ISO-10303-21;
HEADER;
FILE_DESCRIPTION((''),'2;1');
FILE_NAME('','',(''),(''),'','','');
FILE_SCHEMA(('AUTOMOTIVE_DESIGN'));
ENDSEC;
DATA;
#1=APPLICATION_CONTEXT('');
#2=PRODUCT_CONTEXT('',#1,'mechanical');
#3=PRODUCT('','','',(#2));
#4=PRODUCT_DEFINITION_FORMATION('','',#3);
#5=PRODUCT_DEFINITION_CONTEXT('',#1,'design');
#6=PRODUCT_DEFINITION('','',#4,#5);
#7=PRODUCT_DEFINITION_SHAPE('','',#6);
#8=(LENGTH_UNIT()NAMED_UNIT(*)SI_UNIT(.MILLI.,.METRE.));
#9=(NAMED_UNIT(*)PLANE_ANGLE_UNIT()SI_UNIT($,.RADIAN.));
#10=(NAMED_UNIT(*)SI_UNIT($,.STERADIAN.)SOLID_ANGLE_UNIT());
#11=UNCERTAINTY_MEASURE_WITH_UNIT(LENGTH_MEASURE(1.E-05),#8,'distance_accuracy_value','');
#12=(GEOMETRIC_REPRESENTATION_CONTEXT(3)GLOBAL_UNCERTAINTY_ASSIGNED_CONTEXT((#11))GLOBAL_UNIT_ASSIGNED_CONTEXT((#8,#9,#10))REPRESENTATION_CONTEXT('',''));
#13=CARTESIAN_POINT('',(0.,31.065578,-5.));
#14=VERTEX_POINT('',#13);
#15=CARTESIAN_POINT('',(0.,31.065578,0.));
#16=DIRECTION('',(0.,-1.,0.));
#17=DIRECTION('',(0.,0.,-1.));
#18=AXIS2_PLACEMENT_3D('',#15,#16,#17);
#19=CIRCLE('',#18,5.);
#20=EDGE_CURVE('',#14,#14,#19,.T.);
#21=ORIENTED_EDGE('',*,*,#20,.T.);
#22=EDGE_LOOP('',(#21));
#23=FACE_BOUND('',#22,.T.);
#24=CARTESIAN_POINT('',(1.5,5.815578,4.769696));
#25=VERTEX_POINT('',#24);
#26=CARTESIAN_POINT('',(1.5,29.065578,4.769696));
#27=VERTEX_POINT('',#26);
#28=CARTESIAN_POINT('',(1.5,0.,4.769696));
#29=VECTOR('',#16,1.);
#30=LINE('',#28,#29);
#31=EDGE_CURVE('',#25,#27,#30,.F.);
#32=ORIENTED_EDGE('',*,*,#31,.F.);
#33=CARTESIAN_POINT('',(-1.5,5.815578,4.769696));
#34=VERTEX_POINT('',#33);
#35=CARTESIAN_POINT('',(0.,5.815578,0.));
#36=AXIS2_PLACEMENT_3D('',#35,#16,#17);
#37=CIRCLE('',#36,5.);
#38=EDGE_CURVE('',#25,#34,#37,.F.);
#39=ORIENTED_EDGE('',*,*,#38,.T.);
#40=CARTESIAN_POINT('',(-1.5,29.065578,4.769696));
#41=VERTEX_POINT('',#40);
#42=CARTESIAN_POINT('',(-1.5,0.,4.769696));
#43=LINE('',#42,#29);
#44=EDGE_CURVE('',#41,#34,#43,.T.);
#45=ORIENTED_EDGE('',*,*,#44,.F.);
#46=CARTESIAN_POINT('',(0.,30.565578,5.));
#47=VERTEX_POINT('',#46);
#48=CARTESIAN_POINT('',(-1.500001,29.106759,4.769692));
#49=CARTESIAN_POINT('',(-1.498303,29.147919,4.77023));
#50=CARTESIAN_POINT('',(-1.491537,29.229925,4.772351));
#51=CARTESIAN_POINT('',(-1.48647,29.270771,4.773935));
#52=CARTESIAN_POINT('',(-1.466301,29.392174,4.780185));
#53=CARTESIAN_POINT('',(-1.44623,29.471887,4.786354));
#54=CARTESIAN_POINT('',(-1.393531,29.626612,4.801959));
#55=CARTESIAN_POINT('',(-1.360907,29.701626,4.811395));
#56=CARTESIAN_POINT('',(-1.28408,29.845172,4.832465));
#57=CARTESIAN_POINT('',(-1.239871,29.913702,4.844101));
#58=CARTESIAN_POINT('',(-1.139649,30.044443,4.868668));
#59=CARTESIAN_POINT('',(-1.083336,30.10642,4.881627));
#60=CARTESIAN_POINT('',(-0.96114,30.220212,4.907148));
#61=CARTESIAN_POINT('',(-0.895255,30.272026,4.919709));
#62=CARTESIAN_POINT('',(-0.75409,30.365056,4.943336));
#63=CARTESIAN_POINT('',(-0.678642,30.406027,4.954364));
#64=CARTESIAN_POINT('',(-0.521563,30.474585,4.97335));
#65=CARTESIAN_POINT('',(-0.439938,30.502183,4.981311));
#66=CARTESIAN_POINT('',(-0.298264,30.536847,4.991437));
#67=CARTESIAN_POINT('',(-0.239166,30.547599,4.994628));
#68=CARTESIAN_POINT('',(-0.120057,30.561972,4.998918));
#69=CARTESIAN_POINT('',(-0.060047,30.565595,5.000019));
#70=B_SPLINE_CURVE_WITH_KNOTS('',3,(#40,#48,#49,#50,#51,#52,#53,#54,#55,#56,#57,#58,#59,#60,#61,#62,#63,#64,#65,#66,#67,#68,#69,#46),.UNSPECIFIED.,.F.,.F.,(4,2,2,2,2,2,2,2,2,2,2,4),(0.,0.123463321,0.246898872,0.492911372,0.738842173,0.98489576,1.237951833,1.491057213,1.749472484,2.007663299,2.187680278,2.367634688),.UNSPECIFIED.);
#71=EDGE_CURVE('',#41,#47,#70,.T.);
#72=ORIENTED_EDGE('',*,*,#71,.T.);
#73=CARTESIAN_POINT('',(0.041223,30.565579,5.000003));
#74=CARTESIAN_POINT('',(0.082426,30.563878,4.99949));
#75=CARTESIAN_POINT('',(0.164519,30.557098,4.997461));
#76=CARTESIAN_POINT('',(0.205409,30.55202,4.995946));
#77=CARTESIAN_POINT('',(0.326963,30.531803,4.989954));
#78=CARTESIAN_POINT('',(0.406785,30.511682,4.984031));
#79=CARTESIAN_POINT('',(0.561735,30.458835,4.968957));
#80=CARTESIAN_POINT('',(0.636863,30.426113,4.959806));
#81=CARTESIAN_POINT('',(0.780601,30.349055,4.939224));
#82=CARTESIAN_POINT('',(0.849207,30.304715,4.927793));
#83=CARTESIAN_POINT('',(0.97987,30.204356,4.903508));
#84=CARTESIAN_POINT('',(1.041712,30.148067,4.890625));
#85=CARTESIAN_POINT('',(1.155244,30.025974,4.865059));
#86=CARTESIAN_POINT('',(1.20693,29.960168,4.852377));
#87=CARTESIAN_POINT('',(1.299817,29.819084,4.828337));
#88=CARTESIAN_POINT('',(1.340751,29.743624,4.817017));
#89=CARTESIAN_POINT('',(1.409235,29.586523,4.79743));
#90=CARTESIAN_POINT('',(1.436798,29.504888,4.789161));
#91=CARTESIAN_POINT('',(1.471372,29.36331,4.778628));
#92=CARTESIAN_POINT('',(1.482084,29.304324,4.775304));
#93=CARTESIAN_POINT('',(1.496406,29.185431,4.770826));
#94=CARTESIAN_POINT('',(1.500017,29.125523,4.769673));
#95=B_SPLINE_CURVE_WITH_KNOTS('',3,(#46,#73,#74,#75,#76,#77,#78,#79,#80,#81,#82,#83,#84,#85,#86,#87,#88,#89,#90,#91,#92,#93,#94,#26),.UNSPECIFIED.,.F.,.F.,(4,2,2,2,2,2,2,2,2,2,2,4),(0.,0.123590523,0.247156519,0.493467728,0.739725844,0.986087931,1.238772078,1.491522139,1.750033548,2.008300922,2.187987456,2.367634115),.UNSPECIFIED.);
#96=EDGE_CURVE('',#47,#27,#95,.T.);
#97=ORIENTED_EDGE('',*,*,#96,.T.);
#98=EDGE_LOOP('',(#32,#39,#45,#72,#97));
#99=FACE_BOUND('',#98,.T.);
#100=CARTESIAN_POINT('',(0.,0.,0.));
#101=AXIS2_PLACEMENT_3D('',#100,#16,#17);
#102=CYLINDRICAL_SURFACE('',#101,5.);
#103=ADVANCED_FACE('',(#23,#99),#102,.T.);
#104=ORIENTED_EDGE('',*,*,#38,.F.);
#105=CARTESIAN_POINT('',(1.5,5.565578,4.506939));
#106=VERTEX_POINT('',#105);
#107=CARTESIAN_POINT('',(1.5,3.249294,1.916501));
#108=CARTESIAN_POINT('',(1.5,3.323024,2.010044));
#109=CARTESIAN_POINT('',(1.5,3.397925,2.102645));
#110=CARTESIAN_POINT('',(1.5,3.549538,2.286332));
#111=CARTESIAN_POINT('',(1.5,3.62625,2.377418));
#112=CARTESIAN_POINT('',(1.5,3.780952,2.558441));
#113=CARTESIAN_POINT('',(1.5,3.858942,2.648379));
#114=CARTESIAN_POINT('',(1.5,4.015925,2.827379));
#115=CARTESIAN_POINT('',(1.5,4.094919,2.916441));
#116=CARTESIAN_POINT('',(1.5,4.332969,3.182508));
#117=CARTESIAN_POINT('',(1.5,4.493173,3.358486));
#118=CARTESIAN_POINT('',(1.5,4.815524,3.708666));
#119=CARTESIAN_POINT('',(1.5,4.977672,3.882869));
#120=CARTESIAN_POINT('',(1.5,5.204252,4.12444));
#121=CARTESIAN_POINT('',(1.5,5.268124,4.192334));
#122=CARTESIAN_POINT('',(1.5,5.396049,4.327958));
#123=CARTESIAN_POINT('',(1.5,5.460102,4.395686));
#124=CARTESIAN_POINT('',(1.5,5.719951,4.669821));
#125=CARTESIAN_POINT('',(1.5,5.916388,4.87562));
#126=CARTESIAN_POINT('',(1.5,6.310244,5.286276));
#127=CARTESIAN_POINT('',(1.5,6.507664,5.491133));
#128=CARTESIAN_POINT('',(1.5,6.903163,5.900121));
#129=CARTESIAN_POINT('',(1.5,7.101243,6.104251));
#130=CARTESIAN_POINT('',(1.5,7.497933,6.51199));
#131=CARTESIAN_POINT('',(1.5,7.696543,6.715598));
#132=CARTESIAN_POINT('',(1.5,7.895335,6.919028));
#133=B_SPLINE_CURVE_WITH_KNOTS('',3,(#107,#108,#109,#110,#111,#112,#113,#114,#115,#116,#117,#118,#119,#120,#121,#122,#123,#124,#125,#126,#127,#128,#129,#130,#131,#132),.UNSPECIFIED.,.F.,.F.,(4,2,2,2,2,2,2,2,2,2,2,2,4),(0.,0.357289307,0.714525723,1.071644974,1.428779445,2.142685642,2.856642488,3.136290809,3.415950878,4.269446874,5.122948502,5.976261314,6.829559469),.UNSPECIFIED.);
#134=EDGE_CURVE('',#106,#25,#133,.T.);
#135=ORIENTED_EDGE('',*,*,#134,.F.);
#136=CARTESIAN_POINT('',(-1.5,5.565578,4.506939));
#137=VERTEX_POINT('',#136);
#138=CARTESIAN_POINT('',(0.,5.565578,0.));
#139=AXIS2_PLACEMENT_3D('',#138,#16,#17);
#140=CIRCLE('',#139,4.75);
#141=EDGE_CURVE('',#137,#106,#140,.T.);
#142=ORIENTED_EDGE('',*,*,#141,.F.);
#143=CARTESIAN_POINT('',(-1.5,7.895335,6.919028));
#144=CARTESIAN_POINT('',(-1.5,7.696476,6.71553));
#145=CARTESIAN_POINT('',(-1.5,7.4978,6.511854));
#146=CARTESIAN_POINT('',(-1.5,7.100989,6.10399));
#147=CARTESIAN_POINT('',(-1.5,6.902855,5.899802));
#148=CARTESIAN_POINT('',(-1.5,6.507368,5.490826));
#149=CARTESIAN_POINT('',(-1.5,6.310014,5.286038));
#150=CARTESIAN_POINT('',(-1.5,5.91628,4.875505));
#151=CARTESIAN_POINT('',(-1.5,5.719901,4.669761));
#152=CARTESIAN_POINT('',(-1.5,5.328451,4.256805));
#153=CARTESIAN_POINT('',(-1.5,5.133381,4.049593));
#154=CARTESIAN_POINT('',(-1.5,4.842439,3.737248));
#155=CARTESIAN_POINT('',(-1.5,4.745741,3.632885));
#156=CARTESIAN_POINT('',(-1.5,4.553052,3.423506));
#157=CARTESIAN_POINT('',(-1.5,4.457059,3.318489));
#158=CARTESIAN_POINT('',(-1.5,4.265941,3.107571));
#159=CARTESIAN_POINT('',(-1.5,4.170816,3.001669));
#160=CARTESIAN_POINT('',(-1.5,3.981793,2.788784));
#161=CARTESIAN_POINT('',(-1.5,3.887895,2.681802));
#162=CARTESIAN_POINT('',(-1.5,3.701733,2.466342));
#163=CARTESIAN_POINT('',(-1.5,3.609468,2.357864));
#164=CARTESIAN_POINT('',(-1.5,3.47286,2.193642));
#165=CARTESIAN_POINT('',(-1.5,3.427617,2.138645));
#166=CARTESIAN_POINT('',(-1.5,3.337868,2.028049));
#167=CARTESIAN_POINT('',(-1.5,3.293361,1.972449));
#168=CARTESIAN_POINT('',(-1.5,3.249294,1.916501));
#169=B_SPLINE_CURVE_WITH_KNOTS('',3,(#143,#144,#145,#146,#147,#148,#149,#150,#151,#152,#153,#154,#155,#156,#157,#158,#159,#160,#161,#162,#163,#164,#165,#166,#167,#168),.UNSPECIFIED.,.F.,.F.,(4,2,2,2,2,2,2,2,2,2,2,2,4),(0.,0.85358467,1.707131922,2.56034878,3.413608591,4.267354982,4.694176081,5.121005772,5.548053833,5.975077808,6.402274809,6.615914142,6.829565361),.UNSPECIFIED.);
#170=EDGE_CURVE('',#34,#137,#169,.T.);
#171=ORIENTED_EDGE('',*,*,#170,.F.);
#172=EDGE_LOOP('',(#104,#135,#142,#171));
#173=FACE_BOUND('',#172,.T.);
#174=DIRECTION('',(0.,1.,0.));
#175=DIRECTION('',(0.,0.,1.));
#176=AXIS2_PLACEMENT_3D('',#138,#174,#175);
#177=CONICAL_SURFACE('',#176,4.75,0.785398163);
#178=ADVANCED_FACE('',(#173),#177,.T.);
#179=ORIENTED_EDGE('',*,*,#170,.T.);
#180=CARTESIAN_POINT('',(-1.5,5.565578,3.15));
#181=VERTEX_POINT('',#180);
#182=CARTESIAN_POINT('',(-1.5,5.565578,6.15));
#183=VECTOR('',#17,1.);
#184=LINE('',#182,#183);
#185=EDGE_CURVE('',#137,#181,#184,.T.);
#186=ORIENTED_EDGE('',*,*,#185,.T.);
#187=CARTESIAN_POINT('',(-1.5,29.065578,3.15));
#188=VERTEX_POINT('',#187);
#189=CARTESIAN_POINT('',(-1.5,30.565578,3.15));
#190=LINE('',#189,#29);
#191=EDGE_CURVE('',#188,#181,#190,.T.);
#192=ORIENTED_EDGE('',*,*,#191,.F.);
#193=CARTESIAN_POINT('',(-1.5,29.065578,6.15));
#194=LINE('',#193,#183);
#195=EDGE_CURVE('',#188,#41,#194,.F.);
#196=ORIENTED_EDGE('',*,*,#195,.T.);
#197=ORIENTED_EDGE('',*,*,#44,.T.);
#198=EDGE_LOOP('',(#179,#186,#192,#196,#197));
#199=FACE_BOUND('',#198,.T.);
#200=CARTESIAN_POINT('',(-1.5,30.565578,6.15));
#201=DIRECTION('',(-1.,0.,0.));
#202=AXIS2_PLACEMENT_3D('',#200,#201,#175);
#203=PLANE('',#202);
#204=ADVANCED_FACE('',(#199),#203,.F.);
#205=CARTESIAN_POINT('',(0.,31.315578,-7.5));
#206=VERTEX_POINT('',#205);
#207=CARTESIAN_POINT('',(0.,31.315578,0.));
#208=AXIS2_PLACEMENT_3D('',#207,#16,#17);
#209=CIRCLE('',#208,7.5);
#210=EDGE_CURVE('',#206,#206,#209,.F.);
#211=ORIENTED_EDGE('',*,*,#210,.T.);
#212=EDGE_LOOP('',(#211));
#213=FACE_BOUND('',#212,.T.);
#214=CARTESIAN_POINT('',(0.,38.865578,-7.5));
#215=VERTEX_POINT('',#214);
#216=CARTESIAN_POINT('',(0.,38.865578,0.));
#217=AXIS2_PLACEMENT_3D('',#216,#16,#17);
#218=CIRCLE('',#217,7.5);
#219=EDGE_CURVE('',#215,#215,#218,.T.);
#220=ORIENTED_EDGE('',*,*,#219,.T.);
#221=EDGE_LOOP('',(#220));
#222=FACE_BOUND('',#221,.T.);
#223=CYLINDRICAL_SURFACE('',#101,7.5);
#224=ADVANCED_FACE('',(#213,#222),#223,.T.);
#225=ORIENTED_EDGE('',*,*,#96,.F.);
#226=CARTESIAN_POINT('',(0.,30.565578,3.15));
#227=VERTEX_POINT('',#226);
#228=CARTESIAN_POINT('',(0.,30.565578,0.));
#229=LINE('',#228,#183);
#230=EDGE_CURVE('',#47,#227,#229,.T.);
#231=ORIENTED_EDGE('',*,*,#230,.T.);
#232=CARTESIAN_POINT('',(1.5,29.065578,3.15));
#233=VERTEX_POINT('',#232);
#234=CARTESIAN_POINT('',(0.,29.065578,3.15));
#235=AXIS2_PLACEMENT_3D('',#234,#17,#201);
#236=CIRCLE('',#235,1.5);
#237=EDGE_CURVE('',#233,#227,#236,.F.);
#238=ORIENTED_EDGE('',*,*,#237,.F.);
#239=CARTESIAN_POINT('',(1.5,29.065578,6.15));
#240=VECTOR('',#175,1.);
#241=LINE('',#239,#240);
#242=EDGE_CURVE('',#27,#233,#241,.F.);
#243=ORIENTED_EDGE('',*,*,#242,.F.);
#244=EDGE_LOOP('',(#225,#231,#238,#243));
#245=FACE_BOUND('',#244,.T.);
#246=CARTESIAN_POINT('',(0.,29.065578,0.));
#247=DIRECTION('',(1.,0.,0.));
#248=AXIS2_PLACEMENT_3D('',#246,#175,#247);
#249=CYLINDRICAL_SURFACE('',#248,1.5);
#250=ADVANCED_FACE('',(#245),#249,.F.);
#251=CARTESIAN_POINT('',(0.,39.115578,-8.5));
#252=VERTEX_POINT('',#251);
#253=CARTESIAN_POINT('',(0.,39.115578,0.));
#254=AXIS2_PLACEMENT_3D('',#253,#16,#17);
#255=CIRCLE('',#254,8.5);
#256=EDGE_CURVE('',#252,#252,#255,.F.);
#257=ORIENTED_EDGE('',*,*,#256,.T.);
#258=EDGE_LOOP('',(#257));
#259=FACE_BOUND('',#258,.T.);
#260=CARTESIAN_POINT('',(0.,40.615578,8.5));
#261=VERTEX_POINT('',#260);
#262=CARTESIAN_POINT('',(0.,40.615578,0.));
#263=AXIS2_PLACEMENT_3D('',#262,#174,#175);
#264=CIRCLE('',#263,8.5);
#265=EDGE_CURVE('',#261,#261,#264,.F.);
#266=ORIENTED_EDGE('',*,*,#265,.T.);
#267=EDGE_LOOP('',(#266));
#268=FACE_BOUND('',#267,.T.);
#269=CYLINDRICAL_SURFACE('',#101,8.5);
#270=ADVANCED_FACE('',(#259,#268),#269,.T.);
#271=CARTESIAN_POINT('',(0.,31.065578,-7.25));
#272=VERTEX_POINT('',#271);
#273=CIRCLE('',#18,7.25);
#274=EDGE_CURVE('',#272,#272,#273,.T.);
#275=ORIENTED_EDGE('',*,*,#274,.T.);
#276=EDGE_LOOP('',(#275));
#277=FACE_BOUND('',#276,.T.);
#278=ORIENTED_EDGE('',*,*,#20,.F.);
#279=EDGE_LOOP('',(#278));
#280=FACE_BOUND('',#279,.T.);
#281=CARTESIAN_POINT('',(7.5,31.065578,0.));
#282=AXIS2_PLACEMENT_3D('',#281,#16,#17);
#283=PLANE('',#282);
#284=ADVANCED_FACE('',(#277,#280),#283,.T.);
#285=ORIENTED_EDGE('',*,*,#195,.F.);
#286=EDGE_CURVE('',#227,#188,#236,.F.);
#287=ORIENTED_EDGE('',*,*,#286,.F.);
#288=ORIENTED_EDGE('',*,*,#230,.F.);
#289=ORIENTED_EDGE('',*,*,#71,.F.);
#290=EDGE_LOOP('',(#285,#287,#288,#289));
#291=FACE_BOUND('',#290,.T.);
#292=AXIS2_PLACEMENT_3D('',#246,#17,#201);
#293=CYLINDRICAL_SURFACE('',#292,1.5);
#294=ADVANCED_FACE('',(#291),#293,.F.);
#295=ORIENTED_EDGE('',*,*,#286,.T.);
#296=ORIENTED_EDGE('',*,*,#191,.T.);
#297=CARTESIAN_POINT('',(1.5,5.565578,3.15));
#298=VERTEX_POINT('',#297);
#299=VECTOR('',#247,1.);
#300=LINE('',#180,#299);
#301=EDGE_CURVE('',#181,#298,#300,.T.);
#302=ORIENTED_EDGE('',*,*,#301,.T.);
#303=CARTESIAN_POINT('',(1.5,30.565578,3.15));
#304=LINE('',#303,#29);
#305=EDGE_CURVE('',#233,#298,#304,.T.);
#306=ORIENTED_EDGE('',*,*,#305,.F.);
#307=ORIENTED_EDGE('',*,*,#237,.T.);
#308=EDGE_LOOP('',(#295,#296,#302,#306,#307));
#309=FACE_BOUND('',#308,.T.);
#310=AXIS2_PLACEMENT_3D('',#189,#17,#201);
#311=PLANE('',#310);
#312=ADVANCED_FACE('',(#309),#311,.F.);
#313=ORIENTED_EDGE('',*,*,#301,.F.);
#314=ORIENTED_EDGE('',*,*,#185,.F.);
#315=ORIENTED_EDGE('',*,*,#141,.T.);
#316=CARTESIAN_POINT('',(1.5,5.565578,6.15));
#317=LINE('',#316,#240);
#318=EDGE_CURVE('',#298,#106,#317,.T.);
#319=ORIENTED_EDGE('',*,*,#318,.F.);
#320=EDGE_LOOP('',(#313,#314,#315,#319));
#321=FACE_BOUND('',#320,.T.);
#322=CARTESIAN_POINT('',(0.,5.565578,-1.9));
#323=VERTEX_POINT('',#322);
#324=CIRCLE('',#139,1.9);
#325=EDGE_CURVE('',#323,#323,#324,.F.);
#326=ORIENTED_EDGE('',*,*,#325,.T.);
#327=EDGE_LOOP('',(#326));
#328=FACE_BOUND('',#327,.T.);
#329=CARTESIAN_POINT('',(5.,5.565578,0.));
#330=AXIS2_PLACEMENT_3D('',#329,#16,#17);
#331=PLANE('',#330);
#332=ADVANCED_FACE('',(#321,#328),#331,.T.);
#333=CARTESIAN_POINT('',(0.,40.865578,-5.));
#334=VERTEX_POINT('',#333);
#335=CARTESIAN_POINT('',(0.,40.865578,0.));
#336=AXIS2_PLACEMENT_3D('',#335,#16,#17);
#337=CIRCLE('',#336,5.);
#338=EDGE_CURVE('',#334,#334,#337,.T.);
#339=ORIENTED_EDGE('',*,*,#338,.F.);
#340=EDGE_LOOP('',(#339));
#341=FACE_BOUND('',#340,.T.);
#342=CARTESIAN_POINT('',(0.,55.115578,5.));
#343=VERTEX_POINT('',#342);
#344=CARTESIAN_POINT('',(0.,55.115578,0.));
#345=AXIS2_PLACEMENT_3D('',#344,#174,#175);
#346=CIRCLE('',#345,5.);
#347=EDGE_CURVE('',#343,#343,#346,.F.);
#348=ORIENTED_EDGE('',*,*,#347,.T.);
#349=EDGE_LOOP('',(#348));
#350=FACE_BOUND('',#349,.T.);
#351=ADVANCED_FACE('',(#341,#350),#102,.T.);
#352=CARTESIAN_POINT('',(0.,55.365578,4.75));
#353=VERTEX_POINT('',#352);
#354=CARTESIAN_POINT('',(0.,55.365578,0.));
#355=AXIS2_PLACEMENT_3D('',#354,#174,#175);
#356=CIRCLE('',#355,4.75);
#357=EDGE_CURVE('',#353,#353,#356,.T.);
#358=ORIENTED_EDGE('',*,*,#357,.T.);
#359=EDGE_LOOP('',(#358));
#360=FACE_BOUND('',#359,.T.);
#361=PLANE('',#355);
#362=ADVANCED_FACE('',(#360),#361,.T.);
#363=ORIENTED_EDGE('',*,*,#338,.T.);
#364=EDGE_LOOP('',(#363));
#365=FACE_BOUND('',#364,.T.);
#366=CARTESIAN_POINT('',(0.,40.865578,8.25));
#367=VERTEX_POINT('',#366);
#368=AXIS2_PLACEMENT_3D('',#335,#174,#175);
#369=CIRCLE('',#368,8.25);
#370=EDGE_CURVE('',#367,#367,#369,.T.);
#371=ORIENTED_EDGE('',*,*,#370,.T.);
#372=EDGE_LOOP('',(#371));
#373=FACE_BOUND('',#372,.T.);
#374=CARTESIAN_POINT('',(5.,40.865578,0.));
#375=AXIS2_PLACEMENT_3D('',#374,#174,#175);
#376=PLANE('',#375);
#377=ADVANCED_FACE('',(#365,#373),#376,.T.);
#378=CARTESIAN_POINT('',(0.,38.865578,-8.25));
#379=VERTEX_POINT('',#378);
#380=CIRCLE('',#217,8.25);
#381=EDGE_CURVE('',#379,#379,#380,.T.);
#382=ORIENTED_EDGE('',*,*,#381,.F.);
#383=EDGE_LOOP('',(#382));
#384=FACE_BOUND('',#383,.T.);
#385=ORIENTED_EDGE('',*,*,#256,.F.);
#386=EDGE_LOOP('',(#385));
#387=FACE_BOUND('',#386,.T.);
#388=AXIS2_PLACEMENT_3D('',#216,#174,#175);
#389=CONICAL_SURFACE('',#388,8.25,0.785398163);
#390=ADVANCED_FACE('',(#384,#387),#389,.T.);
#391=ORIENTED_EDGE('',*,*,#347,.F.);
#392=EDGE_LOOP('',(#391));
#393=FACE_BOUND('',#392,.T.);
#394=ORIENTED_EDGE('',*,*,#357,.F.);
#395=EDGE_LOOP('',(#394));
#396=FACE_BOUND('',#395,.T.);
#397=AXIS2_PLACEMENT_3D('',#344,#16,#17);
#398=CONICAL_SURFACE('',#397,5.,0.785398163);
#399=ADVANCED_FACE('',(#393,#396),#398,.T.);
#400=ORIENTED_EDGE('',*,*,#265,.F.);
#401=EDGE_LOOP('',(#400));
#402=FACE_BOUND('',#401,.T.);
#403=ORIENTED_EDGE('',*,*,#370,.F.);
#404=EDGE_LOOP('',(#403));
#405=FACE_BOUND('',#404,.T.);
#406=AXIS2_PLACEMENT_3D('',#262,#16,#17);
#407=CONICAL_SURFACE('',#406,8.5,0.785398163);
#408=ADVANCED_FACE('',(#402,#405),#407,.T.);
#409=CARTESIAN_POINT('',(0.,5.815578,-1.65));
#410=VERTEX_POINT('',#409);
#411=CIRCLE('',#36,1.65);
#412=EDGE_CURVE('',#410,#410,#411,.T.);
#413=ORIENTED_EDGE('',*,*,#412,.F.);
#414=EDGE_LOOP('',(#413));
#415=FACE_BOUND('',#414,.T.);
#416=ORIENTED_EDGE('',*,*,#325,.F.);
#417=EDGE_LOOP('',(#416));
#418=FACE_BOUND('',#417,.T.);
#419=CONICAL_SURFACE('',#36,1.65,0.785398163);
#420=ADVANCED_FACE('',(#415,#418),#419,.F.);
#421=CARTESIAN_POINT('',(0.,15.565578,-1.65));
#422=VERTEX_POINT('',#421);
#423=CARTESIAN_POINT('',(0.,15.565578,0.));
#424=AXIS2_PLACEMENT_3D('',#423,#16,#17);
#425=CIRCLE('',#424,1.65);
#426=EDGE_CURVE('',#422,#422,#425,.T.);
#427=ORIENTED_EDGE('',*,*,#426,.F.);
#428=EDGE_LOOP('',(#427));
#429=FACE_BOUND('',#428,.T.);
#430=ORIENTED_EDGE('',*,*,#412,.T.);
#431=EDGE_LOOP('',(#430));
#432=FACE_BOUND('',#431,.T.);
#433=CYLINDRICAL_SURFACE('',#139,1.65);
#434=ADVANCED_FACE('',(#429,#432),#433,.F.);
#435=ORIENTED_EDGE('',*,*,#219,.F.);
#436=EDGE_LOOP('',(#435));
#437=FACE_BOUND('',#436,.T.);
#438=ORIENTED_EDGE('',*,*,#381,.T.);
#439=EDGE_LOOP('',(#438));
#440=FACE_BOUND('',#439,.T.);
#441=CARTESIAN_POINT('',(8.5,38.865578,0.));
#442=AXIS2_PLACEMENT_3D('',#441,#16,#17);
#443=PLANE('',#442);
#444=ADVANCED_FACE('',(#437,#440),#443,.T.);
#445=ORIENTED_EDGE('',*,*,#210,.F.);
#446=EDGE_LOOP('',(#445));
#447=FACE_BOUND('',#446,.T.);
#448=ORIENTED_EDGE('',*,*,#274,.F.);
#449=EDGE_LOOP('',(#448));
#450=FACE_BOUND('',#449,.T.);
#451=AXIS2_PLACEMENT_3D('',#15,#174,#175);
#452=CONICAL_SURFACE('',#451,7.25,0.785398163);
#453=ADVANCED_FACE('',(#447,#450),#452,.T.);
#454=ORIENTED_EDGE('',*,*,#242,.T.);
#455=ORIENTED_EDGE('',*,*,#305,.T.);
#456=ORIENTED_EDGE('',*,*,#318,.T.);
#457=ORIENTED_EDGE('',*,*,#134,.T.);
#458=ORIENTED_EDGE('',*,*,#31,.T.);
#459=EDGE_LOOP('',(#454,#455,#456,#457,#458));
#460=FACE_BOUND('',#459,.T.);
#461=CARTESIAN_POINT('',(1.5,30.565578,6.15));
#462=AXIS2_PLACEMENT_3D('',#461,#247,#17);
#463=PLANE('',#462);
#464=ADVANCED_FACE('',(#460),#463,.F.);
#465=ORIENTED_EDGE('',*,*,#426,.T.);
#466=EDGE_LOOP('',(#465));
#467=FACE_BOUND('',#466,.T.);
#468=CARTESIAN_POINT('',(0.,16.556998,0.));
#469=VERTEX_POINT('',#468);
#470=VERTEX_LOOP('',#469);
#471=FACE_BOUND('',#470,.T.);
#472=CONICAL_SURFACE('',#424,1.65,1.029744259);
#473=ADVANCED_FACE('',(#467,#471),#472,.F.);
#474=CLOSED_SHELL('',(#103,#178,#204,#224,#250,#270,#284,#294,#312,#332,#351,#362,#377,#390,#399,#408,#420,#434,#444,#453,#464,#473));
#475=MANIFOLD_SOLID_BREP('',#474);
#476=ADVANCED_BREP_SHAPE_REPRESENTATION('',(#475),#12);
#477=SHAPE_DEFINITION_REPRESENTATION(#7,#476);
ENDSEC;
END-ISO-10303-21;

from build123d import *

# Parameters (mm, degrees)
TAP_DRILL_FOR_M4_TAP1_D     = 3.3
TAP_DRILL_FOR_M4_TAP1_DEPTH = 10
TAP_DRILL_FOR_M4_TAP1_TIP   = 0.991420021
CHAMFER1_SIZE               = 0.25
SKETCH4_W                   = 3
SKETCH4_H                   = 3
CUT_EXTRUDE1_DEPTH          = 25
FILLET1_R                   = 1.5


with BuildPart() as part:
    # Sketch1 → Revolve1 (revolve)
    with BuildSketch(Plane.XY, mode=Mode.PRIVATE) as revolve1_sk:
        Polygon((0, 55.365578046), (5, 55.365578046), (5, 40.865578046), (8.5, 40.865578046), (8.5, 38.865578046), (7.5, 38.865578046), (7.5, 31.065578046), (5, 31.065578046), (5, 5.565578046), (0, 5.565578046), align=None)
    revolve(revolve1_sk.sketch.rotate(Axis((0, 0, 0), (0, 1, 0)), 90), axis=Axis((0, 0, 0), (0, 1, 0)))

    # Tap Drill for M4 Tap1
    with Locations(Plane(origin=(0, 5.565578046, 0), x_dir=(-1, 0, 0), z_dir=(0, -1, 0))):
        with Locations((0, 0)):
            Hole(TAP_DRILL_FOR_M4_TAP1_D / 2, depth=TAP_DRILL_FOR_M4_TAP1_DEPTH)
            with Locations((0, 0, -(TAP_DRILL_FOR_M4_TAP1_DEPTH + TAP_DRILL_FOR_M4_TAP1_TIP / 2))):  # 118° drill point
                Cone(0, TAP_DRILL_FOR_M4_TAP1_D / 2, TAP_DRILL_FOR_M4_TAP1_TIP, mode=Mode.SUBTRACT)

    # Chamfer1
    chamfer1_edges = [part.edges().sort_by_distance(p)[0] for p in [
        (0, 55.365578046, 5),
        (-1.65, 5.565578046, 0),
        (0, 5.565578046, 5),
        (0, 31.065578046, 7.5),
        (0, 38.865578046, 8.5),
        (0, 40.865578046, 8.5),
    ]]
    chamfer(chamfer1_edges, length=CHAMFER1_SIZE)

    # Sketch4 → Cut-Extrude1 (cut)
    with BuildSketch(Plane.XZ.offset(-5.565578046)):
        with Locations((0, 4.65)):
            Rectangle(SKETCH4_W, SKETCH4_H)
    extrude(amount=-CUT_EXTRUDE1_DEPTH, mode=Mode.SUBTRACT)

    # Fillet1
    fillet1_edges = [part.edges().sort_by_distance(p)[0] for p in [
        (1.5, 30.565578046, 3.959848004),
        (-1.5, 30.565578046, 3.959848004),
    ]]
    fillet(fillet1_edges, radius=FILLET1_R - 0.0001)  # a hair under: the kernel refuses the full size


solid = part.part
